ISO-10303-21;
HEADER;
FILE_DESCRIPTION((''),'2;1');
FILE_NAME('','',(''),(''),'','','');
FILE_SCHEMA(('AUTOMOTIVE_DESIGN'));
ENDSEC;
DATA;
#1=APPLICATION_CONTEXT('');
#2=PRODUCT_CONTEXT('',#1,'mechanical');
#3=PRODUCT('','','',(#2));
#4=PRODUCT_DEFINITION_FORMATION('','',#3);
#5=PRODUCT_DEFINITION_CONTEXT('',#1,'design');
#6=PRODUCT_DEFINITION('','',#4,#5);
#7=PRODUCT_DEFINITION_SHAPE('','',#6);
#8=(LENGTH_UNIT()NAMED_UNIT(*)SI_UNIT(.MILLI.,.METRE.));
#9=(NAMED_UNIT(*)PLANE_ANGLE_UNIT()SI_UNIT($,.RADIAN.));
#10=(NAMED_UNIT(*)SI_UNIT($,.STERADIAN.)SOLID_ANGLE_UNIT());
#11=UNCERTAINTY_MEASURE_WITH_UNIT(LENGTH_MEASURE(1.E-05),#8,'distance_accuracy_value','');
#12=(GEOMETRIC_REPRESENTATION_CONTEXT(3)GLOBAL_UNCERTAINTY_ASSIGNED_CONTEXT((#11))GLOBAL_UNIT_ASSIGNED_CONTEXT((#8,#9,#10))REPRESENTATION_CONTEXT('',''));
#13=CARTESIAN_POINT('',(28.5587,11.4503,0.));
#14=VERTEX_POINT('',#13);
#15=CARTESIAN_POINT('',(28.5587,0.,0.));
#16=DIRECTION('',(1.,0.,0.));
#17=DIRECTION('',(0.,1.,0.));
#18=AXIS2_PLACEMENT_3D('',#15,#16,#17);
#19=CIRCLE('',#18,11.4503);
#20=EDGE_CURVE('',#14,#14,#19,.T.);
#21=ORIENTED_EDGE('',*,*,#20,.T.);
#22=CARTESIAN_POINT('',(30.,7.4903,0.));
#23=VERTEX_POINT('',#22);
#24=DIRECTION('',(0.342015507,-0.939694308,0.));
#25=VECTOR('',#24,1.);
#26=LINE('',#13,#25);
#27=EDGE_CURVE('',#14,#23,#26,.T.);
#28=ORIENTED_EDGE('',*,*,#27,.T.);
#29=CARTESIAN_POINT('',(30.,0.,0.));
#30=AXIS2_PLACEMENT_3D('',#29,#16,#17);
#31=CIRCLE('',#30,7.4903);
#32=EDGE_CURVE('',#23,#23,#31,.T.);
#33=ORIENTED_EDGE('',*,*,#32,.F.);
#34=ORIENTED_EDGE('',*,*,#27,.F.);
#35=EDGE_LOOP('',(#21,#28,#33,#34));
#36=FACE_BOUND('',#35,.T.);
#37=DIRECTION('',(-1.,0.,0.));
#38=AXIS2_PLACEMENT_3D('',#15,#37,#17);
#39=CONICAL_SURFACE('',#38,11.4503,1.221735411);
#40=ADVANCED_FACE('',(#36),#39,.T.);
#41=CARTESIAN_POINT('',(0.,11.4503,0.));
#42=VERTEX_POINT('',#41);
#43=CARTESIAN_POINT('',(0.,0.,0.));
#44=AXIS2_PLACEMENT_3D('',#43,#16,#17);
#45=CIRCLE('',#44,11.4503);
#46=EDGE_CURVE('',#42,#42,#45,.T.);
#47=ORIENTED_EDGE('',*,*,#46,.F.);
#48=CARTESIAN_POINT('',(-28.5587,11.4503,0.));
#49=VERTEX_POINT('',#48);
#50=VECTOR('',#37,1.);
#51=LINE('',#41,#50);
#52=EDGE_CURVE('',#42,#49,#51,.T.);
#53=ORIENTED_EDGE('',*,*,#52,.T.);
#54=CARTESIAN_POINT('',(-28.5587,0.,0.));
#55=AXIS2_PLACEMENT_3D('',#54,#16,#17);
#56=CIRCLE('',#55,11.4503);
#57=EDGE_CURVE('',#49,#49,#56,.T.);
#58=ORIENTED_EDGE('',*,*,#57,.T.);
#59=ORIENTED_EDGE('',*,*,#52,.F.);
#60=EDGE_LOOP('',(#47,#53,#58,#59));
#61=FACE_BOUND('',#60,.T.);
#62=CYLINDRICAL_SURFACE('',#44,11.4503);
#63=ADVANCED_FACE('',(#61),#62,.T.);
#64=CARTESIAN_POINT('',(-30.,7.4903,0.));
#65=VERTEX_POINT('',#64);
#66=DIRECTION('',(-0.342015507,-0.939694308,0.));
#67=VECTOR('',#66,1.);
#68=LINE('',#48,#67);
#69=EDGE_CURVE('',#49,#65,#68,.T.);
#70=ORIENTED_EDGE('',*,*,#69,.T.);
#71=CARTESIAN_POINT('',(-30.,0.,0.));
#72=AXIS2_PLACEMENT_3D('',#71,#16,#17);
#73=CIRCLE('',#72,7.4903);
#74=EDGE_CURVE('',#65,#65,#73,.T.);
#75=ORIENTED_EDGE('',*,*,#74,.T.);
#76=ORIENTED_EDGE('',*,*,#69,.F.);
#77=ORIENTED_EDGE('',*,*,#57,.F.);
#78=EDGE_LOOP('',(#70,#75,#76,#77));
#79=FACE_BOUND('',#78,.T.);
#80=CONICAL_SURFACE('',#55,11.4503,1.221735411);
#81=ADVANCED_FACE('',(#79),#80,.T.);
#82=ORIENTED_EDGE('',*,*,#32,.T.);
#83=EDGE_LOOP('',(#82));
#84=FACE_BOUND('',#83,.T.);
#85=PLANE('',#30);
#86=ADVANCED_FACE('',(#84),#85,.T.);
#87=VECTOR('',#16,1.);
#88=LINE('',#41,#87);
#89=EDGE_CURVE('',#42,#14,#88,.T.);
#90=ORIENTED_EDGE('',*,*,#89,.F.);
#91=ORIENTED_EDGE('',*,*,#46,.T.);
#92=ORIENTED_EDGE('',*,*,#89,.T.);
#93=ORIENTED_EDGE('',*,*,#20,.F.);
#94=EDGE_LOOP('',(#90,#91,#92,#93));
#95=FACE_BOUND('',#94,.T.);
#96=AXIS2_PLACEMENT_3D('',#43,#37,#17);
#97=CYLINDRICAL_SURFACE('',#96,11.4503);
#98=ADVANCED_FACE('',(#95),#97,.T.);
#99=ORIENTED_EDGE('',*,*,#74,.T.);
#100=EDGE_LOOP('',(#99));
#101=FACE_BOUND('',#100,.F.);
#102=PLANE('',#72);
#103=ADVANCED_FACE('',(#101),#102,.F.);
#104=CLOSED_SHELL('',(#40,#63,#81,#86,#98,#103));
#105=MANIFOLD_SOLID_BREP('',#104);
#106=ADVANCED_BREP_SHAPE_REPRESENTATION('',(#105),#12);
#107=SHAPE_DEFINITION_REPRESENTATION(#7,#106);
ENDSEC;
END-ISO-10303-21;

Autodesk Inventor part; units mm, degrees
ref_plane "YZ Plane" through (0, 0, 0) normal (1, 0, 0) x (0, 1, 0)
ref_plane "XZ Plane" through (0, 0, 0) normal (0, 1, 0) x (-1, 0, 0)
ref_plane "XY Plane" through (0, 0, 0) normal (0, 0, 1) x (1, 0, 0)
sketch "Base Body Sketch" plane through (0, 0, 0) normal (1, 0, 0) x (0, 1, 0)
  circle A0 centre (0, 0) radius 11.4503
  dimension "d5" = 22.9006
extrude "Base Body" add sketch "Base Body Sketch" along normal mid plane 60
sketch "Sketch5" plane through (30, 0, 0) normal (1, 0, 0) x (0, 0, -1)
  circle A0 centre (0, 0) radius 11.4503 projected
  circle A1 centre (0, 0) radius 9.6503
  dimension "d59" = 19.3006
surface extrude "Pitch Diameter" sketch "Sketch5" against normal through all shown no curves A1
chamfer "Chamfer1" distance 1.4413 distance2 3.96 1 edges at (30, -11.4503, 0) measured on face at (20, 11.4132, -0.9214)
chamfer "Chamfer2" distance 1.4413 distance2 3.96 1 edges at (-30, -11.4503, 0) measured on face at (-20, 11.4132, -0.9214)
sketch "Tooth Sketch" plane through (0, 0, 0) normal (0, 0, 1) x (1, 0, 0)
  line L0 (0, 21.74) -> (0, 10.96) projected
  line L1 (-38.8672, 11.5648) -> (-37.3842, 7.4903)
  line L2 (-36.1291, 7.4903) -> (-34.6461, 11.5648)
  line L3 (-50.5346, 0) -> (-37.4554, 0) projected
  line L4 (-38.8672, 11.5648) -> (-36.7566, 11.5648)
  line L5 (-36.7566, 11.5648) -> (-34.6461, 11.5648)
  line L6 (-37.3842, 7.4903) -> (-36.7566, 7.4903)
  line L7 (-36.7566, 7.4903) -> (-36.1291, 7.4903)
  line L8 (-36.7566, 9.6503) -> (-35.3429, 9.6503) construction
  line L9 (-36.7566, 11.5648) -> (-36.7566, 7.4903) construction
  dimension "d24" = 110
  dimension "d25" = 36.7566
  dimension "d26" = 1.4137
  dimension "d27" = 7.4903
  dimension "d28" = 9.6503
  dimension "d29" = 11.5648
feature "Tooth" [suppressed]
pattern_circular "Tooth Pattern" [suppressed]
feature "Left Tooth" [suppressed]
pattern_circular "Left Tooth Pattern" [suppressed]
equation "\"d6\" = da_b"
equation "\"d8\" = fd_cham1"
equation "\"d9\" = 0.5 * fd_cham2"
equation "\"d10\" = fd_cham1"
equation "\"d11\" = 0.5 * fd_cham2"
equation "\"d25\" = fd_dist"
equation "\"d26\" = 0.25 * da_px"
equation "\"d27\" = 0.5 * da_df"
equation "\"d28\" = 0.5 * da_d"
equation "\"d29\" = 0.505 * da_da"
equation "\"d32\" = fd_n"
equation "\"da_rightdir\" = 0"
equation "\"d64\" = fd_n"
equation "\"d5\" = da_da"
equation "\"d59\" = da_d"
equation "\"da_aw\" = 68.15028"
equation "\"da_b\" = 60"
equation "\"da_df\" = 14.98056"
equation "\"da_da\" = 22.90056"
equation "\"fd_cham2\" = da_da - da_df"
equation "\"fd_cham1\" = 0.181985 * fd_cham2"
equation "\"da_d\" = 19.30056"
equation "\"da_px\" = 5.65487"
equation "\"da_alfat\" = 20deg"
equation "\"d49\" = da_aw"
equation "\"d79\" = da_aw"
equation "\"fd_dist\" = 36.756634"
equation "\"fd_n\" = 13"
properties part number "Worm" material "Steel, Mild"
